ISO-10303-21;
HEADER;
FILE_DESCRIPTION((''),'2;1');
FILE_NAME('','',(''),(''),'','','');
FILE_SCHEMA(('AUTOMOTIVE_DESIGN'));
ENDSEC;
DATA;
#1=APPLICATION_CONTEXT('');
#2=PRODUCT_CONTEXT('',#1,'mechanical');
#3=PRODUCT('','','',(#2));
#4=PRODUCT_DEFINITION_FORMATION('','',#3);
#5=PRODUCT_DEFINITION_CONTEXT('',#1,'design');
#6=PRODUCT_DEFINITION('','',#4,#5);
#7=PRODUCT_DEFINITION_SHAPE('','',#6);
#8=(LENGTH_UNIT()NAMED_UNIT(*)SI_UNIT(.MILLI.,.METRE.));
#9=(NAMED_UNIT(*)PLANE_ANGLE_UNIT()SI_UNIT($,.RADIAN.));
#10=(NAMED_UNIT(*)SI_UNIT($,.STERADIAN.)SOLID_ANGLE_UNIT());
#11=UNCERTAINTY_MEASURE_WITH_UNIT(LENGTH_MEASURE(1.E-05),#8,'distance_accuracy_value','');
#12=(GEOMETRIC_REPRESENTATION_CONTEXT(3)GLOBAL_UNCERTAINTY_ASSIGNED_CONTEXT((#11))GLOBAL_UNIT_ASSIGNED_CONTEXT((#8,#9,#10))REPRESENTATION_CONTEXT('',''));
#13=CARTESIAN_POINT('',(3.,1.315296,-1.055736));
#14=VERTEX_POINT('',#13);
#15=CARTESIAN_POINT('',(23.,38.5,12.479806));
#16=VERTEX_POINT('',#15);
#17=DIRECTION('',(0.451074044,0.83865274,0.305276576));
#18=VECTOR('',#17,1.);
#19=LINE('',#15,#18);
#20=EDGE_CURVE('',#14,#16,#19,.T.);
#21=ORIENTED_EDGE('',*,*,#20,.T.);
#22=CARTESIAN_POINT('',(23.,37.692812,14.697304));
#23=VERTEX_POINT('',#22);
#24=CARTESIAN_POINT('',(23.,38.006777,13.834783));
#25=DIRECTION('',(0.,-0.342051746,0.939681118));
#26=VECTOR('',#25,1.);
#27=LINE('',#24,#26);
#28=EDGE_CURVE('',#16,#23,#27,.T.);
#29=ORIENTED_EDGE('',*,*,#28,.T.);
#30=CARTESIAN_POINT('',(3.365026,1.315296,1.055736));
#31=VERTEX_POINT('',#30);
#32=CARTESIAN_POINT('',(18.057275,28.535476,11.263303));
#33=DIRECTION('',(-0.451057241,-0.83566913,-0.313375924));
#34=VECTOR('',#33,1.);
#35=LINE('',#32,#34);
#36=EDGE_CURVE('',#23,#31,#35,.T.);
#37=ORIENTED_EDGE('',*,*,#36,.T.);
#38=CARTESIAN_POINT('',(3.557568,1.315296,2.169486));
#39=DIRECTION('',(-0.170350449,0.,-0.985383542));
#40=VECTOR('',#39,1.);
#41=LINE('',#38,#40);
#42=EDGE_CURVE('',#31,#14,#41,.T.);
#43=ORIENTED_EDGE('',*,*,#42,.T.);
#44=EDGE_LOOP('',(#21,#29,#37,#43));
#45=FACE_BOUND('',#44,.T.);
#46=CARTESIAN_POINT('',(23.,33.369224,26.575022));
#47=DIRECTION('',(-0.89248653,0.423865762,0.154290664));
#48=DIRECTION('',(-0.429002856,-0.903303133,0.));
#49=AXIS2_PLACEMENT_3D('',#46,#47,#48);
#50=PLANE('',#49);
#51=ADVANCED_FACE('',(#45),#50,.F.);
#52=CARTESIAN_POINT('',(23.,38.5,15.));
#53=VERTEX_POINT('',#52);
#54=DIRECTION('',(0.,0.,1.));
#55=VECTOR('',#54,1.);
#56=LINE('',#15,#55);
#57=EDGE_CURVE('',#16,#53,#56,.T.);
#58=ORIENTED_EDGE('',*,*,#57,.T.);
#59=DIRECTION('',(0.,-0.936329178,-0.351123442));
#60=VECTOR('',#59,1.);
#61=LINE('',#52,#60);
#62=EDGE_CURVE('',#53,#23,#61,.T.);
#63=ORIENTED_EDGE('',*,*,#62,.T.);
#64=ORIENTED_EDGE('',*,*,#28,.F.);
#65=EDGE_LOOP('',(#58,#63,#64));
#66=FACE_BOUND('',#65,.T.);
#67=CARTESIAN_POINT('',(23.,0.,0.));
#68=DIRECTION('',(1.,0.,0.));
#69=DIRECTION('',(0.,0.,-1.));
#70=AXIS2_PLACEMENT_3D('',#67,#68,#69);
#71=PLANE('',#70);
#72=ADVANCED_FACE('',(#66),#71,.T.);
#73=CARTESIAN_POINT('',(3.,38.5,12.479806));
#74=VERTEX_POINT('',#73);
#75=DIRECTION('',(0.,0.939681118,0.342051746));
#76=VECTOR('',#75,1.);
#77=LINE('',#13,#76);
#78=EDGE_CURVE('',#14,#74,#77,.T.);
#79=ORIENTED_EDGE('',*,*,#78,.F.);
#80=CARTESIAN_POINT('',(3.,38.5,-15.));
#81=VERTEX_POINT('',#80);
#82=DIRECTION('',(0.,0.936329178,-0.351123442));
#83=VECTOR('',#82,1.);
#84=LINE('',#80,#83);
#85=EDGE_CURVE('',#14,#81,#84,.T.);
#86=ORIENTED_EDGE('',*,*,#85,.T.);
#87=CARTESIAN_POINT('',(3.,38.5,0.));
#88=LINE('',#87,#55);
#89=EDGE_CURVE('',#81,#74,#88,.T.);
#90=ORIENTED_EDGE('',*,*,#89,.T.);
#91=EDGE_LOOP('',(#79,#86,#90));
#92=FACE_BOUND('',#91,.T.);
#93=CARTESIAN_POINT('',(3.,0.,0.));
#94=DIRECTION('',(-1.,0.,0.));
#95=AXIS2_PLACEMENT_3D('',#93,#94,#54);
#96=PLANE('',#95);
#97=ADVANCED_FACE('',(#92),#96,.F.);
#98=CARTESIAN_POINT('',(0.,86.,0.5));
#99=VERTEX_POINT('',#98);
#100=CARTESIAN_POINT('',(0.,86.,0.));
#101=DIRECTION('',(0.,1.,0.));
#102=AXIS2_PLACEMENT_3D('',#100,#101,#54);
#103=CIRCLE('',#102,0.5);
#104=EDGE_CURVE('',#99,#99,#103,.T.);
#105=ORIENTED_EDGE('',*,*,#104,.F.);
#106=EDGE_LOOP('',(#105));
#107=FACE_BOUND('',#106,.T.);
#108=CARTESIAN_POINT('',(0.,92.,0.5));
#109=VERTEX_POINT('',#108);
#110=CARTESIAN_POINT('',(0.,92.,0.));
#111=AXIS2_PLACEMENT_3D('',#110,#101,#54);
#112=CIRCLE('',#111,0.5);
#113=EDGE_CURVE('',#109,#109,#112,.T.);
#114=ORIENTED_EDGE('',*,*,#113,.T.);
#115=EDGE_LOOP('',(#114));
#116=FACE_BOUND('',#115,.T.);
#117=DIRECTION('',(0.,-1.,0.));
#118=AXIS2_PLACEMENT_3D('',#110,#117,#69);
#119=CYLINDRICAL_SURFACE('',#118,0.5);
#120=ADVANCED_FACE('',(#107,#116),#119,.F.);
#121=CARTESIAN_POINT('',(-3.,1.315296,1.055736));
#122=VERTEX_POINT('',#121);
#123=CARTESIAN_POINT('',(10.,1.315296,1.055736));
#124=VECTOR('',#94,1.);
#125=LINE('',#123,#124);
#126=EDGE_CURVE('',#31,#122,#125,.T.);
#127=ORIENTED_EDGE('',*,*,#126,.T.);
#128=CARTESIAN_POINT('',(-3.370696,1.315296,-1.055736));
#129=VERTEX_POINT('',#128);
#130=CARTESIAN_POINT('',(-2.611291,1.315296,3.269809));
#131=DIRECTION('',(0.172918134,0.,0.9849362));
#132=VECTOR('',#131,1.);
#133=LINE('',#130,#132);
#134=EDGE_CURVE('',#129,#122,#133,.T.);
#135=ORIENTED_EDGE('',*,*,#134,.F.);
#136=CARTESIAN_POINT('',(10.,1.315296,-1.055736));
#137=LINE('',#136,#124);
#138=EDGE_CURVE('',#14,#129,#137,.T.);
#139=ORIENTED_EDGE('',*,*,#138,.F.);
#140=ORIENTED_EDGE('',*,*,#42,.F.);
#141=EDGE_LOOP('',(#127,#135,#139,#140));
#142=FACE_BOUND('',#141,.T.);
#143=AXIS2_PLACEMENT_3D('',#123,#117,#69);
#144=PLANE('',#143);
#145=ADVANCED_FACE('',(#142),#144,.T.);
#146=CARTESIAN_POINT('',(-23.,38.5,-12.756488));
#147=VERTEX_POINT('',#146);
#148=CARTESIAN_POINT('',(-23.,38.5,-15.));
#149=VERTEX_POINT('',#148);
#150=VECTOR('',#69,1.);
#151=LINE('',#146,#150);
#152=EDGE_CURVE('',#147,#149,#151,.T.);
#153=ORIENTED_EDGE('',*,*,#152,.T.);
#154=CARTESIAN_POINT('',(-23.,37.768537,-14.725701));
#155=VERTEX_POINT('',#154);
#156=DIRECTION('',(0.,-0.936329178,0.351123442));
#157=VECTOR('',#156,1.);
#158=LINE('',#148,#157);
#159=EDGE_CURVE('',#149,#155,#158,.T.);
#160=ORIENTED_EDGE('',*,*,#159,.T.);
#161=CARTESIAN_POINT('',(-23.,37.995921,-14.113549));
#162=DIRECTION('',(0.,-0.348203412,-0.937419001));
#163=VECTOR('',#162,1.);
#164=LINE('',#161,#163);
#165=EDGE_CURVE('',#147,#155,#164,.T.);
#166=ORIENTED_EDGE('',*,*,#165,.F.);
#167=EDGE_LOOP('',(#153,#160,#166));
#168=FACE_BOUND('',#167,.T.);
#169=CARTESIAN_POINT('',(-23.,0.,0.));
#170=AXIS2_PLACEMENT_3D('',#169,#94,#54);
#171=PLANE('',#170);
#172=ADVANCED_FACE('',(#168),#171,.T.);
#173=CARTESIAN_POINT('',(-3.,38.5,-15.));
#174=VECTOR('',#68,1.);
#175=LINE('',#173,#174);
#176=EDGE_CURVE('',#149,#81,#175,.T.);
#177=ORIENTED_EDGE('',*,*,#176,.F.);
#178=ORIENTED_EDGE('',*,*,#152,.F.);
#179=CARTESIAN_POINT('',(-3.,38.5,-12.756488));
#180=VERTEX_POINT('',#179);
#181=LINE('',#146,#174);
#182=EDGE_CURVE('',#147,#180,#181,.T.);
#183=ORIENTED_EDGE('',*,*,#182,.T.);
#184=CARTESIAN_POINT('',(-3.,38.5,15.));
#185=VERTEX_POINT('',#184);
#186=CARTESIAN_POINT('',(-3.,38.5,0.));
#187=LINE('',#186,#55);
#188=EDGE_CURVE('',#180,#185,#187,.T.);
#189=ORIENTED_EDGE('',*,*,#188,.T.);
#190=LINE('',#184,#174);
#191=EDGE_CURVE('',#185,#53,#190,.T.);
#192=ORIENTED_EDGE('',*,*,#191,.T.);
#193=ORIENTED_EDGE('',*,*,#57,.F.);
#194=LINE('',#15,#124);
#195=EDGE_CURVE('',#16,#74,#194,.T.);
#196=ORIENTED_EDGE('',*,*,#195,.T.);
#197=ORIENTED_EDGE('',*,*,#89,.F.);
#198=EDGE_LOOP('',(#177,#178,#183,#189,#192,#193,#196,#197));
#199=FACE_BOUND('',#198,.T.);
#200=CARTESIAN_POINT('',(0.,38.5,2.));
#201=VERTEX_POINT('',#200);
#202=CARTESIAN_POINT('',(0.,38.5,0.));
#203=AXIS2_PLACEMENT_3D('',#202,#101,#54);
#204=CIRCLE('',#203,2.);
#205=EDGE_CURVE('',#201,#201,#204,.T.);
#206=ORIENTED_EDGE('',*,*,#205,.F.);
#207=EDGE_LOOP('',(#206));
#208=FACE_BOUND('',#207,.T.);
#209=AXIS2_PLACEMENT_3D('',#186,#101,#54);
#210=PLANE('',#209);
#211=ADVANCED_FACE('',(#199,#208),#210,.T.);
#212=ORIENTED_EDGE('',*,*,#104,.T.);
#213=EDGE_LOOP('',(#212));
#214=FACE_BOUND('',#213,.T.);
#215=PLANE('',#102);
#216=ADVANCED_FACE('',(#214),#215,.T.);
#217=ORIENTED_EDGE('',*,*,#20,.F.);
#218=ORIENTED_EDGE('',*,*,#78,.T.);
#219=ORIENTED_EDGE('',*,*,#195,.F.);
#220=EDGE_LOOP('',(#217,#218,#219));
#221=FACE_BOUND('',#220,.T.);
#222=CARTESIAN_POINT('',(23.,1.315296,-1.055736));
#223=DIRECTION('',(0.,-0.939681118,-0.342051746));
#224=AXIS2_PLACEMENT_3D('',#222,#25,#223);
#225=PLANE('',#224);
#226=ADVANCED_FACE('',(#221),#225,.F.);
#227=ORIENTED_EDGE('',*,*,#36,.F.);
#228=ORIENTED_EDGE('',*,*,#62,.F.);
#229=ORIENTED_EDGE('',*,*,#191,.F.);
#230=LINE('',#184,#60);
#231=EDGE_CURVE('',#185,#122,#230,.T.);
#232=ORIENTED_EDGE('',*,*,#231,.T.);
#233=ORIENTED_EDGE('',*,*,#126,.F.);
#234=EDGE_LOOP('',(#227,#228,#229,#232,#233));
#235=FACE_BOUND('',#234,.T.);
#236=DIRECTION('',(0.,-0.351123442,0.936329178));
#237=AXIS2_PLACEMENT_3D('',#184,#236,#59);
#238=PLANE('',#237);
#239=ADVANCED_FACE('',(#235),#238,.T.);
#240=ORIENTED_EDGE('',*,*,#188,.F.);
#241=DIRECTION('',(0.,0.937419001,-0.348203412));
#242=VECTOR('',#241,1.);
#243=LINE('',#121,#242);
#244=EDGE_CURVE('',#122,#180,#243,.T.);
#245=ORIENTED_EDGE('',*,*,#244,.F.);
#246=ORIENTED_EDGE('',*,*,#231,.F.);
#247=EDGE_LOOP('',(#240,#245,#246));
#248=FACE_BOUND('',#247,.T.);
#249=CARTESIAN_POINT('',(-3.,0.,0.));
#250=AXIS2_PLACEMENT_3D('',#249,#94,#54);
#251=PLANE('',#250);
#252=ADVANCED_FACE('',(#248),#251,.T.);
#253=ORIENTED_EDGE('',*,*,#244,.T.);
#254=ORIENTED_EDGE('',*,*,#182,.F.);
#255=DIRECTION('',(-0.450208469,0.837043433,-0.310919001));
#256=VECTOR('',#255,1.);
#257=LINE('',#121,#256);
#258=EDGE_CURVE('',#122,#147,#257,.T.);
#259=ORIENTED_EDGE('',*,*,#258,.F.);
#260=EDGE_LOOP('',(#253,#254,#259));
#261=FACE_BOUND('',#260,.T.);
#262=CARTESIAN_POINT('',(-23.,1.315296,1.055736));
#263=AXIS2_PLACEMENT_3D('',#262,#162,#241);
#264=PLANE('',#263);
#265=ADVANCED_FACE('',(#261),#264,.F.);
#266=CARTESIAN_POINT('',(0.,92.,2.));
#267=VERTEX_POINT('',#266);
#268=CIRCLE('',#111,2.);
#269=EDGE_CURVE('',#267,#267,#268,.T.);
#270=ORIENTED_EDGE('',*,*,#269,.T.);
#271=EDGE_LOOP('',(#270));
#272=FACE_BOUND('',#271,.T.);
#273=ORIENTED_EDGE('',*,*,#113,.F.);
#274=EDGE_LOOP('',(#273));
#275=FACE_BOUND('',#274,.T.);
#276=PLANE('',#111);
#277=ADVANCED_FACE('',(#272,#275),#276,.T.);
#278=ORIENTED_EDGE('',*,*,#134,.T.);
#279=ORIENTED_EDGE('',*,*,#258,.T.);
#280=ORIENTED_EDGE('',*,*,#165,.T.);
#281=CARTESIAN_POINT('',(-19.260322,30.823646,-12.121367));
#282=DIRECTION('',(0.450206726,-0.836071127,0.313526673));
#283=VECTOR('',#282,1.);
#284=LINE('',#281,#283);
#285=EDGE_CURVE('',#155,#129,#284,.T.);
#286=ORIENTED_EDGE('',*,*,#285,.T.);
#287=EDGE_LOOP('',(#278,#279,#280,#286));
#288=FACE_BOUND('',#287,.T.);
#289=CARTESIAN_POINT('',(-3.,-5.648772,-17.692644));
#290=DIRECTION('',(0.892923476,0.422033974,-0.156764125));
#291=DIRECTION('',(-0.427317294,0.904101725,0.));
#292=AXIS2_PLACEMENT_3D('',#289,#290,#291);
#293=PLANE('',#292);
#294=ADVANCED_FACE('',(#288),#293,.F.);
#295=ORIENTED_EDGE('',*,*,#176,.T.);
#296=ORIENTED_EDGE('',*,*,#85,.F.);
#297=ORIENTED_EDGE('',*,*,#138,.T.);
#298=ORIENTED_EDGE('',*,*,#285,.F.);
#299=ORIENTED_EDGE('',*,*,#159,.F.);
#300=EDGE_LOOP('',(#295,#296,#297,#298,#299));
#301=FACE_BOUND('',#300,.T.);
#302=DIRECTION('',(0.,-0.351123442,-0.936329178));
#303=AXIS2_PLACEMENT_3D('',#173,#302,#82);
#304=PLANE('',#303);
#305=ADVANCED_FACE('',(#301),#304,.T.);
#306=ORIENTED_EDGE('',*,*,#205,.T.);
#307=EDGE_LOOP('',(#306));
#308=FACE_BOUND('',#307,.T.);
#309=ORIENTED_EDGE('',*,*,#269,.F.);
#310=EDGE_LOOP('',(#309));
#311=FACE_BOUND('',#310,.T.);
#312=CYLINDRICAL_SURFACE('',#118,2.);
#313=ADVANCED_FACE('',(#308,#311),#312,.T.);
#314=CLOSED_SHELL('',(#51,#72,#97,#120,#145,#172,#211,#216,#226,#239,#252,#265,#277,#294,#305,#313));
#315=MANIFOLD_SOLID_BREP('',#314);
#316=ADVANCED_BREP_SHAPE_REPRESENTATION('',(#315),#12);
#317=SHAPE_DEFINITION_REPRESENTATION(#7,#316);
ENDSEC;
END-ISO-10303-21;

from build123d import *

# Parameters (mm, degrees)
SKETCH_1_R               = 0.5
EXTRUDE_1_DEPTH          = 92
SHELL_1_T                = 1.5
EXTRUDE_2_OUTLINE_R      = 0.5
EXTRUDE_2_DEPTH          = 86
EXTRUDE_4_DEPTH          = 3
EXTRUDE_4_DEPTH_BACK     = 3
CUT_EXTRUDE_1_DEPTH      = 3
CUT_EXTRUDE_1_DEPTH_BACK = 3
CUT_EXTRUDE_2_DEPTH      = 10
CUT_EXTRUDE_2_DEPTH_BACK = 10
EXTRUDE_6_DEPTH          = 20
CUT_EXTRUDE_6_DEPTH      = 15
EXTRUDE_7_DEPTH          = 20
CUT_EXTRUDE_7_DEPTH      = 20


# Read off the part's stored shape, not the designer's step: 凸台-拉伸2
with BuildPart() as part:
    # 草图1 → 凸台-拉伸1 (new body)
    with BuildSketch(Plane(origin=(0, 0, 0), x_dir=(1, 0, 0), z_dir=(0, 1, 0))):
        with Locations(Location((0, 0, 0), (0, 0, 270))):
            Circle(SKETCH_1_R)
    extrude(amount=EXTRUDE_1_DEPTH)

    # 抽壳1
    shell_1_openings = [part.faces().sort_by_distance(p)[0] for p in [
        (0, 92, 0),
    ]]
    offset(amount=SHELL_1_T, openings=shell_1_openings, kind=Kind.INTERSECTION)

    # 凸台-拉伸2 outline → 凸台-拉伸2 (add)
    with BuildSketch(Plane(origin=(0, 0, 0), x_dir=(1, 0, 0), z_dir=(0, 1, 0))):
        Circle(EXTRUDE_2_OUTLINE_R)
    extrude(amount=EXTRUDE_2_DEPTH)

    # 草图5 → 凸台-拉伸4 (add, two sides: drawn at the far end of the back side and taken through both)
    with BuildSketch(Plane(origin=(0, 0, 0), x_dir=(0, 0, -1), z_dir=(1, 0, 0)).offset(-EXTRUDE_4_DEPTH_BACK)):
        Polygon((0, 38.5), (-15, 38.5), (0, -1.5), (15, 38.5), align=None)
    extrude(amount=EXTRUDE_4_DEPTH + EXTRUDE_4_DEPTH_BACK)

    # 草图6 → 切除-拉伸1 (cut, two sides: drawn at the far end of the back side and taken through both)
    with BuildSketch(Plane(origin=(0, 0, 0), x_dir=(0, 0, -1), z_dir=(1, 0, 0)).offset(-CUT_EXTRUDE_1_DEPTH_BACK)):
        Polygon((-2.867091748, -1.5), (0, -1.5), (-2.867091748, 6.145577994), align=None)
        Polygon((0, -1.5), (2.807839657, -1.5), (2.807839657, 5.987572419), align=None)
    extrude(amount=CUT_EXTRUDE_1_DEPTH + CUT_EXTRUDE_1_DEPTH_BACK, mode=Mode.SUBTRACT)

    # 草图8 → 切除-拉伸2 (cut, two sides: drawn at the far end of the back side and taken through both)
    with BuildSketch(Plane(origin=(0, 0, 0), x_dir=(0, 0, -1), z_dir=(1, 0, 0)).offset(-CUT_EXTRUDE_2_DEPTH_BACK)):
        Polygon((0, -1.5), (-1.055736005, 1.315296012), (1.055736005, 1.315296012), align=None)
    extrude(amount=CUT_EXTRUDE_2_DEPTH + CUT_EXTRUDE_2_DEPTH_BACK, mode=Mode.SUBTRACT)

    # 草图12 → 凸台-拉伸6 (add)
    with BuildSketch(Plane(origin=(3, 0, 0), x_dir=(0, 0, -1), z_dir=(1, 0, 0))):
        Polygon((1.055736005, 1.315296012), (-12.479805664, 38.5), (-15, 38.5), (-1.055736005, 1.315296012), align=None)
    extrude(amount=EXTRUDE_6_DEPTH)

    # 草图14 → 切除-拉伸6 (cut)
    with BuildSketch(Plane(origin=(0, 0.49322305, -1.354977403), x_dir=(-1, 0, 0), z_dir=(0, 0.3420517460280193, -0.939681117741111))):
        Polygon((-23, 40.446462351), (-3, 0.874842483), (-23, 0.874842483), align=None)
    extrude(amount=-CUT_EXTRUDE_6_DEPTH, mode=Mode.SUBTRACT)

    # 草图15 → 凸台-拉伸7 (add)
    with BuildSketch(Plane.ZY.offset(3)):
        Polygon((1.055736005, 1.315296012), (-12.756487539, 38.5), (-15, 38.5), (-1.055736005, 1.315296012), align=None)
    extrude(amount=EXTRUDE_7_DEPTH)

    # 草图16 → 切除-拉伸7 (cut)
    with BuildSketch(Plane(origin=(0, 0.504079298, 1.357061695), x_dir=(1, 0, 0), z_dir=(0, 0.3482034119031621, 0.9374190012683746))):
        Polygon((-3, 0.865372595), (-23, 40.532484034), (-23, 0.865372595), align=None)
    extrude(amount=-CUT_EXTRUDE_7_DEPTH, mode=Mode.SUBTRACT)


solid = part.part
